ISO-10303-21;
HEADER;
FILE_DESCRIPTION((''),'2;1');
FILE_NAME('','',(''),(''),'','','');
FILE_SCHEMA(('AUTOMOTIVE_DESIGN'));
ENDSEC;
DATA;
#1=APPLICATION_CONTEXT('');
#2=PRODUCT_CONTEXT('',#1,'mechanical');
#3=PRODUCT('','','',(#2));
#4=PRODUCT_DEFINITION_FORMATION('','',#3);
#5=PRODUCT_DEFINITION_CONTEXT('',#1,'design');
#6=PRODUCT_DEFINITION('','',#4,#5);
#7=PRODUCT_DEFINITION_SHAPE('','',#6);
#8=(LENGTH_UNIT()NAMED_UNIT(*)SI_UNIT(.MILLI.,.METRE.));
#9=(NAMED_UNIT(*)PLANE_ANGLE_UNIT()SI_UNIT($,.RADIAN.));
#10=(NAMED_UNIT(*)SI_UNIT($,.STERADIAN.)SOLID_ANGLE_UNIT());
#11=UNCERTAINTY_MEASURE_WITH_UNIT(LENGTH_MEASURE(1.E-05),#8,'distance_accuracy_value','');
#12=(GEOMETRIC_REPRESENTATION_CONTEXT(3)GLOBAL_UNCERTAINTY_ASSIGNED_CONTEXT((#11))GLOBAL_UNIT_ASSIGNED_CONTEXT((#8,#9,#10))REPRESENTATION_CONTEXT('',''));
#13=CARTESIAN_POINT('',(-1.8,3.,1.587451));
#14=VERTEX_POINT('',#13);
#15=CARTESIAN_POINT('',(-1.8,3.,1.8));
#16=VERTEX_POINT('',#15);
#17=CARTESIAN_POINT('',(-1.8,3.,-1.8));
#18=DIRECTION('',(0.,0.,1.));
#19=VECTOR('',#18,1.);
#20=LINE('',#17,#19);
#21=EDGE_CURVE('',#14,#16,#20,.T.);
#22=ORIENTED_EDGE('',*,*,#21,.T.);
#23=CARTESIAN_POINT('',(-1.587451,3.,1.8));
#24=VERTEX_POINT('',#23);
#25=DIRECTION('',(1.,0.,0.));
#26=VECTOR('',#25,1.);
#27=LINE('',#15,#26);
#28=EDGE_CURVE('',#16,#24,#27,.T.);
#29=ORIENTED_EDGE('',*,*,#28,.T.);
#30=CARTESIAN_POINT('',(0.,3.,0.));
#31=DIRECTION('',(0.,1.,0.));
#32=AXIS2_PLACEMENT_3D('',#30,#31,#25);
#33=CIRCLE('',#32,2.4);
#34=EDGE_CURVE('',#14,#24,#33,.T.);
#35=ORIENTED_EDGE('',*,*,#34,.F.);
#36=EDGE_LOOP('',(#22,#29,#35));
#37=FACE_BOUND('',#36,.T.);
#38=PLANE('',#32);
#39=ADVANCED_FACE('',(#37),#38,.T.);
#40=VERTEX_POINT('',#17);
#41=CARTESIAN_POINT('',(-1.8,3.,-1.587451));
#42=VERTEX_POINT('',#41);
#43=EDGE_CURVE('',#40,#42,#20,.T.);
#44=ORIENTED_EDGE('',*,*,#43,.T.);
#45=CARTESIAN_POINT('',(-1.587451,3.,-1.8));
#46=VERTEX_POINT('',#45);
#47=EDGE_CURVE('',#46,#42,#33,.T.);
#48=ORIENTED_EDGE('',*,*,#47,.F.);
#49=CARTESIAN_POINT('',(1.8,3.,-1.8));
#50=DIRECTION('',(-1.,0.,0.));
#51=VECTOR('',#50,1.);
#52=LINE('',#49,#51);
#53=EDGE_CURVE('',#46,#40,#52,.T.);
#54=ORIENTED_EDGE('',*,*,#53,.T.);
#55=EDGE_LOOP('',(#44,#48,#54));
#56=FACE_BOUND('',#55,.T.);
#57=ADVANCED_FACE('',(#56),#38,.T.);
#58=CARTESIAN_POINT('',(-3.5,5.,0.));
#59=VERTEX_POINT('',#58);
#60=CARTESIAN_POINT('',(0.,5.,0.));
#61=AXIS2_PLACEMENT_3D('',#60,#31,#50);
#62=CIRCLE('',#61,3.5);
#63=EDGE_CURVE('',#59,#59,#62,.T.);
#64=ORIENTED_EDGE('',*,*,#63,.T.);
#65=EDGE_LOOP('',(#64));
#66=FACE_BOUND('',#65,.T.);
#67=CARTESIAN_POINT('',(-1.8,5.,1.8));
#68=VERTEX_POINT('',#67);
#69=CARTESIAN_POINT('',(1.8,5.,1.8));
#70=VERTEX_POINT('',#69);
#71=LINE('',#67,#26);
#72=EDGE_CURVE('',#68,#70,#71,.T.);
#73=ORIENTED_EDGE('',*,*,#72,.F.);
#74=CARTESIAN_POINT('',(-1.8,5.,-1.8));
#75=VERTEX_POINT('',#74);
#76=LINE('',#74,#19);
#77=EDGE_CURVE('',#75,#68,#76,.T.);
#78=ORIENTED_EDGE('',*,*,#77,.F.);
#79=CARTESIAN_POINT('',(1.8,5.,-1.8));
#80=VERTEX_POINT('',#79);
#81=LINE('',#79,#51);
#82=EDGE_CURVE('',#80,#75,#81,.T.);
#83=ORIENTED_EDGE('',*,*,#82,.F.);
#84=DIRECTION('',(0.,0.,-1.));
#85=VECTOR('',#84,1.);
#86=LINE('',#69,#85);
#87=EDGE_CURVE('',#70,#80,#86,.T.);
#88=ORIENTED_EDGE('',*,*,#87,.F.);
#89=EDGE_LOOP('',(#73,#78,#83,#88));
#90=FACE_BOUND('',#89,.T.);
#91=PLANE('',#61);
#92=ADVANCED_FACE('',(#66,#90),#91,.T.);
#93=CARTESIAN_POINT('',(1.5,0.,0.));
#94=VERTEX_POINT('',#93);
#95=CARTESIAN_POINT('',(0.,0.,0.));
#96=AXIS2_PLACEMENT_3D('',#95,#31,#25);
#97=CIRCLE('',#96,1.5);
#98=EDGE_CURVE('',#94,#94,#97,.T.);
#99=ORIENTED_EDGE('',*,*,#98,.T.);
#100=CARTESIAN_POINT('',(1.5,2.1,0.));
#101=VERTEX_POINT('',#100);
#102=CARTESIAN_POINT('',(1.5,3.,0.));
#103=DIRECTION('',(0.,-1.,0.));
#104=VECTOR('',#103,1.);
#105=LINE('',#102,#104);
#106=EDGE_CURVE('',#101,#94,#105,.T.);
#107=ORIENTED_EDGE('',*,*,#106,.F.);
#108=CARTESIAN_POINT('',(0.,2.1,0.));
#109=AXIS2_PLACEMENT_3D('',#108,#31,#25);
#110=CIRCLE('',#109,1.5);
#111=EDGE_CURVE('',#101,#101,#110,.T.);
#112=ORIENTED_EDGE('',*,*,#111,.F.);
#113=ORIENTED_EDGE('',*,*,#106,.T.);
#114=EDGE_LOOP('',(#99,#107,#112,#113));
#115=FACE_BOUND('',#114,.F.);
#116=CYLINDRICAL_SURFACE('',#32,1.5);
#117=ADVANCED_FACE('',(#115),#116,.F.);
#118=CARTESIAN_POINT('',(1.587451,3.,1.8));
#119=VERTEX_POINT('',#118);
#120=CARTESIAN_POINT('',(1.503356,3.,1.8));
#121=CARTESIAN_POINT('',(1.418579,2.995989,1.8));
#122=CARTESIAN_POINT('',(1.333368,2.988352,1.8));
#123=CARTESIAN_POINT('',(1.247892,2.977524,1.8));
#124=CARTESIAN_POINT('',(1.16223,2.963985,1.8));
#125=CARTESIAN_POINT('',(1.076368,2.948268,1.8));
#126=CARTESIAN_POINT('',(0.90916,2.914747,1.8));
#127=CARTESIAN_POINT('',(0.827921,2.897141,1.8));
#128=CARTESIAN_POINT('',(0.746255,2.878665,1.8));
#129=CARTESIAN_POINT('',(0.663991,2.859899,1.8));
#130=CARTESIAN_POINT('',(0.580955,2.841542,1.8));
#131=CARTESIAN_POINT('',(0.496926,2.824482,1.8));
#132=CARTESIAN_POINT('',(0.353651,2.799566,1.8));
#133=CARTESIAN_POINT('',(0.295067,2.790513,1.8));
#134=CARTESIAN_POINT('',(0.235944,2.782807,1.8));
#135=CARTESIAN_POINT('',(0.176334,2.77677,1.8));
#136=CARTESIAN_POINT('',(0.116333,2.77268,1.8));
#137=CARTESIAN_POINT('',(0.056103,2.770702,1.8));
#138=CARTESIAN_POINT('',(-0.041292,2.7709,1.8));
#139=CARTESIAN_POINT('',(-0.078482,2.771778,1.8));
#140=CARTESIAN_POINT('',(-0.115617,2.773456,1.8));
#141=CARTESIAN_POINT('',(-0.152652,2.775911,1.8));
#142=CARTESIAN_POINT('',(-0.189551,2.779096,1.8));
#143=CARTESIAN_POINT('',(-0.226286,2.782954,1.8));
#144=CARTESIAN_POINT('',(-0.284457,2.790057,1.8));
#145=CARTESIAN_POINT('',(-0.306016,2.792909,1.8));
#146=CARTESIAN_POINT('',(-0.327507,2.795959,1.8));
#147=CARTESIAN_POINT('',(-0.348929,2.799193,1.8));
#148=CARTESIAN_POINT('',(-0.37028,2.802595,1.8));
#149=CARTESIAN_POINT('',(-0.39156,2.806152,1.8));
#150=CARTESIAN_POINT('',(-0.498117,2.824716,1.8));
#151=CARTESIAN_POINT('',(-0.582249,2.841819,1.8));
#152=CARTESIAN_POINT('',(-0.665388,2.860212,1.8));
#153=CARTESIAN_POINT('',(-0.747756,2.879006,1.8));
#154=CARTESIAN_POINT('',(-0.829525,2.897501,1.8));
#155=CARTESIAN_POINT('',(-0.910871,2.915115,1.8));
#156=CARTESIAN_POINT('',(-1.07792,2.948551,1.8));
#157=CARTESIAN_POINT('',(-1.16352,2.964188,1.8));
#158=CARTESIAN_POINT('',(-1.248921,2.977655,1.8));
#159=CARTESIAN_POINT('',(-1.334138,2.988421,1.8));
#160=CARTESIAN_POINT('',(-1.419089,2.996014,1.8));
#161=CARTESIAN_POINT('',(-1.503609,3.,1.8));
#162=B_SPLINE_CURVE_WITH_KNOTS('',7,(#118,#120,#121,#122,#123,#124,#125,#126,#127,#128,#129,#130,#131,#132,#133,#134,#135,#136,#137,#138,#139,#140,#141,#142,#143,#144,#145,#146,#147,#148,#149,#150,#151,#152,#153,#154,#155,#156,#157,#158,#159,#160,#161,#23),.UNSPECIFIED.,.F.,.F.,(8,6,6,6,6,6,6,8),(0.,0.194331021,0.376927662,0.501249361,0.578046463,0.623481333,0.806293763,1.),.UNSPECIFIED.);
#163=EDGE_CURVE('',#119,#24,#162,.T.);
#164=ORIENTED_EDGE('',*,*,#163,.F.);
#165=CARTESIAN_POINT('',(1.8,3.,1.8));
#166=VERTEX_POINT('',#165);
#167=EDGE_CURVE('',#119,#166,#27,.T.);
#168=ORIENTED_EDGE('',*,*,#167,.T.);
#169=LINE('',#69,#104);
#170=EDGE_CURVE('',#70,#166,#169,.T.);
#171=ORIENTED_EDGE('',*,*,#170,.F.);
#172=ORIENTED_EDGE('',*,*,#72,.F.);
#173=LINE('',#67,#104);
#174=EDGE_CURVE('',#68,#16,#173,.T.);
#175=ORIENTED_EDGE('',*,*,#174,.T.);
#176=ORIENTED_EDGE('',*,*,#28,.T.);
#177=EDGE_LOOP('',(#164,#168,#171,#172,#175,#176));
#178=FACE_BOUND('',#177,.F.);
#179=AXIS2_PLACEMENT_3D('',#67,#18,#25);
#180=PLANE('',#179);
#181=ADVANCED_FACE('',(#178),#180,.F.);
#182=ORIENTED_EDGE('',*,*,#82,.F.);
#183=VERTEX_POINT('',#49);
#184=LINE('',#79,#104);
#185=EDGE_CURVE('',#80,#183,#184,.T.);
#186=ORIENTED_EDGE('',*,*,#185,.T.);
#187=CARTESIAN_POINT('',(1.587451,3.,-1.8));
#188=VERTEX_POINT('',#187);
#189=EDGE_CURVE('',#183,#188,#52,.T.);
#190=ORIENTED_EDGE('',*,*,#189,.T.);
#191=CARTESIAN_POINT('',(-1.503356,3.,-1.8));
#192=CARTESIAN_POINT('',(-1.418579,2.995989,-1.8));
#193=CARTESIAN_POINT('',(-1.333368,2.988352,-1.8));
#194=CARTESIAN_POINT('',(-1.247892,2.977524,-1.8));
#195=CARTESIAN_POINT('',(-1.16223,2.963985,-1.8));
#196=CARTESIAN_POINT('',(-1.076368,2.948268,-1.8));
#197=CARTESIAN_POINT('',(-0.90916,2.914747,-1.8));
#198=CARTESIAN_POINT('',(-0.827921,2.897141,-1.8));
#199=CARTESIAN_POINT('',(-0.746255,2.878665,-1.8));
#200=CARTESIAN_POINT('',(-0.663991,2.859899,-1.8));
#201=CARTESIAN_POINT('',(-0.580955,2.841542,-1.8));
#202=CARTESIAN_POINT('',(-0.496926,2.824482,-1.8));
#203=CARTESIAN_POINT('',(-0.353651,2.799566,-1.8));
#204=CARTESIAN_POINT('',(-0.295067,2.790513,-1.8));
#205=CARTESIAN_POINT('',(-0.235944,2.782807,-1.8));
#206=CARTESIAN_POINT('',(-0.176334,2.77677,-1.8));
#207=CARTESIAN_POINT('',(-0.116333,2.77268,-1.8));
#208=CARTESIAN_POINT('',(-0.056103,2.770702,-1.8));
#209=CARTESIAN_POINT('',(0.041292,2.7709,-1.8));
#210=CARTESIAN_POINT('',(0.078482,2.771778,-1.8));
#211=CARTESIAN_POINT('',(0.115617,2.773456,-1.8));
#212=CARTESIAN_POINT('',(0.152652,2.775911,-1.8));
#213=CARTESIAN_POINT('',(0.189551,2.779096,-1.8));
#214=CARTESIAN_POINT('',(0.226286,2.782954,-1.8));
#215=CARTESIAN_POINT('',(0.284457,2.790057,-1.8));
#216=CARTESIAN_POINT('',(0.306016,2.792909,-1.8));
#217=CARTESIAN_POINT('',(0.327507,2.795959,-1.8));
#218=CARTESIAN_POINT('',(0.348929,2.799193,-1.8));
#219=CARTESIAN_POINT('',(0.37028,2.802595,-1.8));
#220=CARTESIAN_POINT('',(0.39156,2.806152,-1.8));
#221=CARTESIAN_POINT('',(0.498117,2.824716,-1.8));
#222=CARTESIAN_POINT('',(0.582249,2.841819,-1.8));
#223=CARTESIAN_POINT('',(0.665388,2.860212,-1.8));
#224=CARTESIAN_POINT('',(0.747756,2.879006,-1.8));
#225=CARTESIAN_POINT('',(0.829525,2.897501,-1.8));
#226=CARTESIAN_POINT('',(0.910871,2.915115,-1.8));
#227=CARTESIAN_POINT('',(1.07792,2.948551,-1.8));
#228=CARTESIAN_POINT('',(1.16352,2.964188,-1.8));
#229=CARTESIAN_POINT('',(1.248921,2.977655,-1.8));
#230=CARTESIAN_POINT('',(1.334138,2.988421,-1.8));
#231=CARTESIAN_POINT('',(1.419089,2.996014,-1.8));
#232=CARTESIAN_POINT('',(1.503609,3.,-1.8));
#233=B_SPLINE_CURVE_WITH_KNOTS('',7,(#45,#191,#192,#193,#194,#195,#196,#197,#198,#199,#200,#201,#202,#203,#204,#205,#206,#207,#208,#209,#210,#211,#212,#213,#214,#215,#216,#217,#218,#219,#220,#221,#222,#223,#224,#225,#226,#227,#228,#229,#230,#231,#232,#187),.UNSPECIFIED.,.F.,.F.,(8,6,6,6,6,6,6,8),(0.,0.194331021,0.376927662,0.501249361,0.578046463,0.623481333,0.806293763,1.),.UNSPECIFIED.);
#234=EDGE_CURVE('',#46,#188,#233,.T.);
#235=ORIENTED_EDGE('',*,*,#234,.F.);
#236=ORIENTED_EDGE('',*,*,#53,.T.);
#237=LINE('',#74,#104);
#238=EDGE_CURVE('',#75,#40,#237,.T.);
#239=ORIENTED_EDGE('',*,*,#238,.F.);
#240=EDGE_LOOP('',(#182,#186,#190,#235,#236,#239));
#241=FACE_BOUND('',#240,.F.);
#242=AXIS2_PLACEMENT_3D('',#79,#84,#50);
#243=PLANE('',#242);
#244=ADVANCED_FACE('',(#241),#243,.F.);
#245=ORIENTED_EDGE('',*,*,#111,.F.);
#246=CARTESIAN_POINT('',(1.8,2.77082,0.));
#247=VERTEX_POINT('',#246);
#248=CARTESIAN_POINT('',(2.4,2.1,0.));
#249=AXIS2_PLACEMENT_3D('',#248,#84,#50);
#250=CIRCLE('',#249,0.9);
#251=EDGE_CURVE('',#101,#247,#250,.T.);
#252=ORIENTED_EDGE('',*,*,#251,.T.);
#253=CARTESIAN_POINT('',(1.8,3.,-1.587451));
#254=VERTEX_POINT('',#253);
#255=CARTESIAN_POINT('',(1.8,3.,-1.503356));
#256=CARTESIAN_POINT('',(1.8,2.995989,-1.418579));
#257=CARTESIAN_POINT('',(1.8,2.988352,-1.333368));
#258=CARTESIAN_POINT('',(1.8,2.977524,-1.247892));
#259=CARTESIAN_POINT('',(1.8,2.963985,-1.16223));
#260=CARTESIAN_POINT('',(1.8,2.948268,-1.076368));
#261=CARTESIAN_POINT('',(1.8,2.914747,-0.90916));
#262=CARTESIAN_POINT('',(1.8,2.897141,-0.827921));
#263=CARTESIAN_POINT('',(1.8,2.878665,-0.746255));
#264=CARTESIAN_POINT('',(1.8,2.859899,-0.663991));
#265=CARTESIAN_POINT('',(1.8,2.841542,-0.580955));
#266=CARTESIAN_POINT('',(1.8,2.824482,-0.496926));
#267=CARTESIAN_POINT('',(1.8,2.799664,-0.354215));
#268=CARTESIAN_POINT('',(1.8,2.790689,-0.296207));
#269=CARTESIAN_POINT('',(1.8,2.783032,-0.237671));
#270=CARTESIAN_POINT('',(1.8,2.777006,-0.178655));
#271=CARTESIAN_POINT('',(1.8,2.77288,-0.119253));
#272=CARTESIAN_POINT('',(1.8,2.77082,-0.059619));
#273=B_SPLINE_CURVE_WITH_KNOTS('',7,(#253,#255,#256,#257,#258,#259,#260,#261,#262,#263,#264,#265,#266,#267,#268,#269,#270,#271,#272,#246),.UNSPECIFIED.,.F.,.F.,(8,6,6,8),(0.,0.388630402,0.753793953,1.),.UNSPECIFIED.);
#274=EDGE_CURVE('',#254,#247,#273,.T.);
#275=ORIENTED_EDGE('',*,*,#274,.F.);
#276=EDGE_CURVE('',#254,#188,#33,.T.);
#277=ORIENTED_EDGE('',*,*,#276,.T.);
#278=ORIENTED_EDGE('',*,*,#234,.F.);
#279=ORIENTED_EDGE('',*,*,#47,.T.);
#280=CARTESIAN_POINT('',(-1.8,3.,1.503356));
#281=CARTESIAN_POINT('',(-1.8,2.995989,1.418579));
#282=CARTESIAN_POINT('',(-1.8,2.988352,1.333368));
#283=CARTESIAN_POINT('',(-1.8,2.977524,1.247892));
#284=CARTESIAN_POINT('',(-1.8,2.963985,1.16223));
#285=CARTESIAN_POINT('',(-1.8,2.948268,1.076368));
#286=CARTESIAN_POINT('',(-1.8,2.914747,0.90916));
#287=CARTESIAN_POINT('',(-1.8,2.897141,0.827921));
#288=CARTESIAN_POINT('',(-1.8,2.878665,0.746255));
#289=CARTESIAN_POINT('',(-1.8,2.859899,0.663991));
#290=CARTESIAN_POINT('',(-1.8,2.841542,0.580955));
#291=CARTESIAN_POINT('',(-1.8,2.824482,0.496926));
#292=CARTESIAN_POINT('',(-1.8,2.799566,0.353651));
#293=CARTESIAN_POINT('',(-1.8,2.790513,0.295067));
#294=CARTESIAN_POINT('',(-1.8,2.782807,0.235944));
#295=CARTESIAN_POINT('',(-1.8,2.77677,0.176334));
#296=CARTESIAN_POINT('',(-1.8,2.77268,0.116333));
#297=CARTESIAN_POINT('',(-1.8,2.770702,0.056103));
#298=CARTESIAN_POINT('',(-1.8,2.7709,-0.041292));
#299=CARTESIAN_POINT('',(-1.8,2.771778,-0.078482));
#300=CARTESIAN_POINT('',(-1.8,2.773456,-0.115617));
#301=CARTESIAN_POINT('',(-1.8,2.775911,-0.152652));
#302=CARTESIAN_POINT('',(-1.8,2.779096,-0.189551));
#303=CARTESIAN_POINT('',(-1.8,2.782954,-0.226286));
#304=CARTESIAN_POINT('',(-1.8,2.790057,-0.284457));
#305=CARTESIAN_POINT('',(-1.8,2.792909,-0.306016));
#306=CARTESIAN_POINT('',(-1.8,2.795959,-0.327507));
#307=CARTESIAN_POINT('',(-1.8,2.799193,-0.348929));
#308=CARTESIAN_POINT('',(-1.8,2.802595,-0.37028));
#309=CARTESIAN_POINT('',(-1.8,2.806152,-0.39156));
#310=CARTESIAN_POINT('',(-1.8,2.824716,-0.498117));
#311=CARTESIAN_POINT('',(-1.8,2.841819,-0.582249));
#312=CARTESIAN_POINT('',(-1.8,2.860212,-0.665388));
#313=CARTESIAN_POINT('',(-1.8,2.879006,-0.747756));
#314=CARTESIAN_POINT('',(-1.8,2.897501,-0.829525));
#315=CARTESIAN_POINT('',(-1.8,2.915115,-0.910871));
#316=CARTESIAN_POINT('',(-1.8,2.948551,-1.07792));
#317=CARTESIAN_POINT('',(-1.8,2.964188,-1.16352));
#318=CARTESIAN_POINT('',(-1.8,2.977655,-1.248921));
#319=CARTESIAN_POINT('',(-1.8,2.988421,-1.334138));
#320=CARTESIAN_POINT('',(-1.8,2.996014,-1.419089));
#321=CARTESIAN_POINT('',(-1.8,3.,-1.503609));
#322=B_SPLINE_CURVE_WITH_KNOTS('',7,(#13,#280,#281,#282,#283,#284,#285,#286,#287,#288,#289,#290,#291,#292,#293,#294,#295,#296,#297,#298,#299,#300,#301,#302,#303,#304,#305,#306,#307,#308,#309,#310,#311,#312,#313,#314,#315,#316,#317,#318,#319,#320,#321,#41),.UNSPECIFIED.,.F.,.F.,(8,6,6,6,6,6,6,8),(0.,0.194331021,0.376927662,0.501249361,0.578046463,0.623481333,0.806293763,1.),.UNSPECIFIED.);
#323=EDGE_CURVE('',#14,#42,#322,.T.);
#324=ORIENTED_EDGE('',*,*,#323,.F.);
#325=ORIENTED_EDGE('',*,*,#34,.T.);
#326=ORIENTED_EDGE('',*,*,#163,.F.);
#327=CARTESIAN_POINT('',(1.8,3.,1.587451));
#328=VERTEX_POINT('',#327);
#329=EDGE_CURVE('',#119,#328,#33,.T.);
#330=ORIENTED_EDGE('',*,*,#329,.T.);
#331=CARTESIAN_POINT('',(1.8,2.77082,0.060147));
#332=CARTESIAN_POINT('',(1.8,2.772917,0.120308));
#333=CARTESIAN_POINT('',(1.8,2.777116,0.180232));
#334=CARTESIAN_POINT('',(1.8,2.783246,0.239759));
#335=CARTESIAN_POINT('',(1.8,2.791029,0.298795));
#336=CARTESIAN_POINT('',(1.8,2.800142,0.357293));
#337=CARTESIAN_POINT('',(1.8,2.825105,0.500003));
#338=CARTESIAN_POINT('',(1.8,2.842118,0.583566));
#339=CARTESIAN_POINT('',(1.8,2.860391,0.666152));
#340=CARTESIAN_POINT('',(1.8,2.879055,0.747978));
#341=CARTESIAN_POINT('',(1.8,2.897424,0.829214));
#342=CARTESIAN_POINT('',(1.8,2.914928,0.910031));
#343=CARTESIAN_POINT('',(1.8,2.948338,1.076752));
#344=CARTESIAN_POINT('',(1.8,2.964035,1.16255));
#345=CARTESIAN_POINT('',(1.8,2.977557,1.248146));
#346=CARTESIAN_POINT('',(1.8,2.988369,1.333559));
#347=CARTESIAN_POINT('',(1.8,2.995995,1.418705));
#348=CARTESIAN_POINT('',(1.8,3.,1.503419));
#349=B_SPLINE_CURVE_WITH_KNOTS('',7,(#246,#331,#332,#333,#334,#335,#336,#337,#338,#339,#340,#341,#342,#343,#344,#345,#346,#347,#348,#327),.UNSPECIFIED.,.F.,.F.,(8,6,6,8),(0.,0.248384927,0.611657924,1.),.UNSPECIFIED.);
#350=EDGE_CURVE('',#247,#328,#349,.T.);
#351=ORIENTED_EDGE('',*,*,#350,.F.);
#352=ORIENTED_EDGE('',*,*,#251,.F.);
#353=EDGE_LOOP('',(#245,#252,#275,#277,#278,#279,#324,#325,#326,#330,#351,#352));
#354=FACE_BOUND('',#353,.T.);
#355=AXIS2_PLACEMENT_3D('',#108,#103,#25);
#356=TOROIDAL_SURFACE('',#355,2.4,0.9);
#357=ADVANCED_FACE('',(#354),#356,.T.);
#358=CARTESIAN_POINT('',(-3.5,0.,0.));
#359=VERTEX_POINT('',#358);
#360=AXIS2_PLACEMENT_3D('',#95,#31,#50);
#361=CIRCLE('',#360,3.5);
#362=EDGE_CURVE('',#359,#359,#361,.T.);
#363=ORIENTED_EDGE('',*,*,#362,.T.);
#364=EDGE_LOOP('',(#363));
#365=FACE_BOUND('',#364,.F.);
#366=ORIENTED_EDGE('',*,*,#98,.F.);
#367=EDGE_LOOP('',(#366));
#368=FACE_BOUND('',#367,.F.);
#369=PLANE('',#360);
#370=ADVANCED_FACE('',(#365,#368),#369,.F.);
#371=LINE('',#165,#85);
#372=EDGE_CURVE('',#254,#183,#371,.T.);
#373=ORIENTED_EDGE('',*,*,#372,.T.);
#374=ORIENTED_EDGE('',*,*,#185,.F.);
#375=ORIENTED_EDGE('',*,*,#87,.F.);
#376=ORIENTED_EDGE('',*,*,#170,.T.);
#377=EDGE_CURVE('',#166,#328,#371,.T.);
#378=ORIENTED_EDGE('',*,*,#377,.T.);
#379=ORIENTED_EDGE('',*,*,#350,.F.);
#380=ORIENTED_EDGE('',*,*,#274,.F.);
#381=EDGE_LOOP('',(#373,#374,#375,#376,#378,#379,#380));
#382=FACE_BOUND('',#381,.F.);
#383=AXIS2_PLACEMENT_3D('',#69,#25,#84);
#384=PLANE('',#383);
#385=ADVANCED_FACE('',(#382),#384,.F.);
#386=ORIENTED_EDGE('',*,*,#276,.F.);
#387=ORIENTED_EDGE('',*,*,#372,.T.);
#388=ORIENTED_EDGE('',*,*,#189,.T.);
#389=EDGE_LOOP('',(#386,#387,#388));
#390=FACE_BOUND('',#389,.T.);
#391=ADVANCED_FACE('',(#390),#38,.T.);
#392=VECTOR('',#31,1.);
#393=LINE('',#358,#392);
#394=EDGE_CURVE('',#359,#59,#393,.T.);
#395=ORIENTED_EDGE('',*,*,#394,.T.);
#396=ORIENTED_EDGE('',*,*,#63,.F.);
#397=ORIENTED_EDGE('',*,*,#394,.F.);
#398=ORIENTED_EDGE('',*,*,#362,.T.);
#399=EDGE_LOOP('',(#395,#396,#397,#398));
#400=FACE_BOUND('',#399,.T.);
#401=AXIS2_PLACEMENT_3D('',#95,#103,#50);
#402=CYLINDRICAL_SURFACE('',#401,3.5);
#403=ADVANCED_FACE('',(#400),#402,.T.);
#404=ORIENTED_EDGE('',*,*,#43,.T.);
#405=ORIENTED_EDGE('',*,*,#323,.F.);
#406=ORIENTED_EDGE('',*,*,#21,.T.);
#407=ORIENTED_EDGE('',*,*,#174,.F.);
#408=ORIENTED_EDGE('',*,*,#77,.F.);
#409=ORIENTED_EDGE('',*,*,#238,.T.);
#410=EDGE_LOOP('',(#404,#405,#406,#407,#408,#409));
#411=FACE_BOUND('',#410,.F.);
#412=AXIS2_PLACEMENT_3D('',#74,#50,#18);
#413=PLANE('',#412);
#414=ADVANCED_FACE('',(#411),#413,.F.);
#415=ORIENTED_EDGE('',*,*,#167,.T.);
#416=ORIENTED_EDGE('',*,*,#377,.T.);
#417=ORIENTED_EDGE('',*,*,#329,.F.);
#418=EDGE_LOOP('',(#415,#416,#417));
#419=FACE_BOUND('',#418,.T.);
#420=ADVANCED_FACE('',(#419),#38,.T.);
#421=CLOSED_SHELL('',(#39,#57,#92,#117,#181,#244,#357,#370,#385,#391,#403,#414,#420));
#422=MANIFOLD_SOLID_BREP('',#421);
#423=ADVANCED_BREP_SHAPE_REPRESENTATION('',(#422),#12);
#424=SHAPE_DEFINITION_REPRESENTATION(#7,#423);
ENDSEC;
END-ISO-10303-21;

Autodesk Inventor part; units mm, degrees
ref_plane "YZ Plane" through (0, 0, 0) normal (1, 0, 0) x (0, 1, 0)
ref_plane "XZ Plane" through (0, 0, 0) normal (0, 1, 0) x (-1, 0, 0)
ref_plane "XY Plane" through (0, 0, 0) normal (0, 0, 1) x (1, 0, 0)
sketch "Sketch1" plane through (0, 0, 0) normal (0, 1, 0) x (-1, 0, 0)
  circle A0 centre (0, 0) radius 3.5
  dimension "d0" = 7
extrude "Extrusion1" add sketch "Sketch1" along normal blind 5
sketch "Sketch2" plane through (0, 5, 0) normal (0, 1, 0) x (1, 0, 0)
  line L0 (-1.8, -1.8) -> (1.8, -1.8)
  line L1 (1.8, -1.8) -> (1.8, 1.8)
  line L2 (1.8, 1.8) -> (-1.8, 1.8)
  line L3 (-1.8, 1.8) -> (-1.8, -1.8)
  point P0 (0, 0)
  dimension "d3" = 3.6
  dimension "d4" = 3.6
  dimension "d5" = 1.8
  dimension "d6" = 1.8
extrude "Extrusion2" cut sketch "Sketch2" against normal blind 2
sketch "Sketch3" plane through (0, 3, 0) normal (0, 1, 0) x (1, 0, 0)
  circle A0 centre (0, 0) radius 1.5
  dimension "d9" = 3
extrude "Extrusion3" cut sketch "Sketch3" against normal through all
fillet "Fillet1" radius 0.9 1 edges at (-1.5, 3, 0)
properties part number "LED8SUPPORT"
